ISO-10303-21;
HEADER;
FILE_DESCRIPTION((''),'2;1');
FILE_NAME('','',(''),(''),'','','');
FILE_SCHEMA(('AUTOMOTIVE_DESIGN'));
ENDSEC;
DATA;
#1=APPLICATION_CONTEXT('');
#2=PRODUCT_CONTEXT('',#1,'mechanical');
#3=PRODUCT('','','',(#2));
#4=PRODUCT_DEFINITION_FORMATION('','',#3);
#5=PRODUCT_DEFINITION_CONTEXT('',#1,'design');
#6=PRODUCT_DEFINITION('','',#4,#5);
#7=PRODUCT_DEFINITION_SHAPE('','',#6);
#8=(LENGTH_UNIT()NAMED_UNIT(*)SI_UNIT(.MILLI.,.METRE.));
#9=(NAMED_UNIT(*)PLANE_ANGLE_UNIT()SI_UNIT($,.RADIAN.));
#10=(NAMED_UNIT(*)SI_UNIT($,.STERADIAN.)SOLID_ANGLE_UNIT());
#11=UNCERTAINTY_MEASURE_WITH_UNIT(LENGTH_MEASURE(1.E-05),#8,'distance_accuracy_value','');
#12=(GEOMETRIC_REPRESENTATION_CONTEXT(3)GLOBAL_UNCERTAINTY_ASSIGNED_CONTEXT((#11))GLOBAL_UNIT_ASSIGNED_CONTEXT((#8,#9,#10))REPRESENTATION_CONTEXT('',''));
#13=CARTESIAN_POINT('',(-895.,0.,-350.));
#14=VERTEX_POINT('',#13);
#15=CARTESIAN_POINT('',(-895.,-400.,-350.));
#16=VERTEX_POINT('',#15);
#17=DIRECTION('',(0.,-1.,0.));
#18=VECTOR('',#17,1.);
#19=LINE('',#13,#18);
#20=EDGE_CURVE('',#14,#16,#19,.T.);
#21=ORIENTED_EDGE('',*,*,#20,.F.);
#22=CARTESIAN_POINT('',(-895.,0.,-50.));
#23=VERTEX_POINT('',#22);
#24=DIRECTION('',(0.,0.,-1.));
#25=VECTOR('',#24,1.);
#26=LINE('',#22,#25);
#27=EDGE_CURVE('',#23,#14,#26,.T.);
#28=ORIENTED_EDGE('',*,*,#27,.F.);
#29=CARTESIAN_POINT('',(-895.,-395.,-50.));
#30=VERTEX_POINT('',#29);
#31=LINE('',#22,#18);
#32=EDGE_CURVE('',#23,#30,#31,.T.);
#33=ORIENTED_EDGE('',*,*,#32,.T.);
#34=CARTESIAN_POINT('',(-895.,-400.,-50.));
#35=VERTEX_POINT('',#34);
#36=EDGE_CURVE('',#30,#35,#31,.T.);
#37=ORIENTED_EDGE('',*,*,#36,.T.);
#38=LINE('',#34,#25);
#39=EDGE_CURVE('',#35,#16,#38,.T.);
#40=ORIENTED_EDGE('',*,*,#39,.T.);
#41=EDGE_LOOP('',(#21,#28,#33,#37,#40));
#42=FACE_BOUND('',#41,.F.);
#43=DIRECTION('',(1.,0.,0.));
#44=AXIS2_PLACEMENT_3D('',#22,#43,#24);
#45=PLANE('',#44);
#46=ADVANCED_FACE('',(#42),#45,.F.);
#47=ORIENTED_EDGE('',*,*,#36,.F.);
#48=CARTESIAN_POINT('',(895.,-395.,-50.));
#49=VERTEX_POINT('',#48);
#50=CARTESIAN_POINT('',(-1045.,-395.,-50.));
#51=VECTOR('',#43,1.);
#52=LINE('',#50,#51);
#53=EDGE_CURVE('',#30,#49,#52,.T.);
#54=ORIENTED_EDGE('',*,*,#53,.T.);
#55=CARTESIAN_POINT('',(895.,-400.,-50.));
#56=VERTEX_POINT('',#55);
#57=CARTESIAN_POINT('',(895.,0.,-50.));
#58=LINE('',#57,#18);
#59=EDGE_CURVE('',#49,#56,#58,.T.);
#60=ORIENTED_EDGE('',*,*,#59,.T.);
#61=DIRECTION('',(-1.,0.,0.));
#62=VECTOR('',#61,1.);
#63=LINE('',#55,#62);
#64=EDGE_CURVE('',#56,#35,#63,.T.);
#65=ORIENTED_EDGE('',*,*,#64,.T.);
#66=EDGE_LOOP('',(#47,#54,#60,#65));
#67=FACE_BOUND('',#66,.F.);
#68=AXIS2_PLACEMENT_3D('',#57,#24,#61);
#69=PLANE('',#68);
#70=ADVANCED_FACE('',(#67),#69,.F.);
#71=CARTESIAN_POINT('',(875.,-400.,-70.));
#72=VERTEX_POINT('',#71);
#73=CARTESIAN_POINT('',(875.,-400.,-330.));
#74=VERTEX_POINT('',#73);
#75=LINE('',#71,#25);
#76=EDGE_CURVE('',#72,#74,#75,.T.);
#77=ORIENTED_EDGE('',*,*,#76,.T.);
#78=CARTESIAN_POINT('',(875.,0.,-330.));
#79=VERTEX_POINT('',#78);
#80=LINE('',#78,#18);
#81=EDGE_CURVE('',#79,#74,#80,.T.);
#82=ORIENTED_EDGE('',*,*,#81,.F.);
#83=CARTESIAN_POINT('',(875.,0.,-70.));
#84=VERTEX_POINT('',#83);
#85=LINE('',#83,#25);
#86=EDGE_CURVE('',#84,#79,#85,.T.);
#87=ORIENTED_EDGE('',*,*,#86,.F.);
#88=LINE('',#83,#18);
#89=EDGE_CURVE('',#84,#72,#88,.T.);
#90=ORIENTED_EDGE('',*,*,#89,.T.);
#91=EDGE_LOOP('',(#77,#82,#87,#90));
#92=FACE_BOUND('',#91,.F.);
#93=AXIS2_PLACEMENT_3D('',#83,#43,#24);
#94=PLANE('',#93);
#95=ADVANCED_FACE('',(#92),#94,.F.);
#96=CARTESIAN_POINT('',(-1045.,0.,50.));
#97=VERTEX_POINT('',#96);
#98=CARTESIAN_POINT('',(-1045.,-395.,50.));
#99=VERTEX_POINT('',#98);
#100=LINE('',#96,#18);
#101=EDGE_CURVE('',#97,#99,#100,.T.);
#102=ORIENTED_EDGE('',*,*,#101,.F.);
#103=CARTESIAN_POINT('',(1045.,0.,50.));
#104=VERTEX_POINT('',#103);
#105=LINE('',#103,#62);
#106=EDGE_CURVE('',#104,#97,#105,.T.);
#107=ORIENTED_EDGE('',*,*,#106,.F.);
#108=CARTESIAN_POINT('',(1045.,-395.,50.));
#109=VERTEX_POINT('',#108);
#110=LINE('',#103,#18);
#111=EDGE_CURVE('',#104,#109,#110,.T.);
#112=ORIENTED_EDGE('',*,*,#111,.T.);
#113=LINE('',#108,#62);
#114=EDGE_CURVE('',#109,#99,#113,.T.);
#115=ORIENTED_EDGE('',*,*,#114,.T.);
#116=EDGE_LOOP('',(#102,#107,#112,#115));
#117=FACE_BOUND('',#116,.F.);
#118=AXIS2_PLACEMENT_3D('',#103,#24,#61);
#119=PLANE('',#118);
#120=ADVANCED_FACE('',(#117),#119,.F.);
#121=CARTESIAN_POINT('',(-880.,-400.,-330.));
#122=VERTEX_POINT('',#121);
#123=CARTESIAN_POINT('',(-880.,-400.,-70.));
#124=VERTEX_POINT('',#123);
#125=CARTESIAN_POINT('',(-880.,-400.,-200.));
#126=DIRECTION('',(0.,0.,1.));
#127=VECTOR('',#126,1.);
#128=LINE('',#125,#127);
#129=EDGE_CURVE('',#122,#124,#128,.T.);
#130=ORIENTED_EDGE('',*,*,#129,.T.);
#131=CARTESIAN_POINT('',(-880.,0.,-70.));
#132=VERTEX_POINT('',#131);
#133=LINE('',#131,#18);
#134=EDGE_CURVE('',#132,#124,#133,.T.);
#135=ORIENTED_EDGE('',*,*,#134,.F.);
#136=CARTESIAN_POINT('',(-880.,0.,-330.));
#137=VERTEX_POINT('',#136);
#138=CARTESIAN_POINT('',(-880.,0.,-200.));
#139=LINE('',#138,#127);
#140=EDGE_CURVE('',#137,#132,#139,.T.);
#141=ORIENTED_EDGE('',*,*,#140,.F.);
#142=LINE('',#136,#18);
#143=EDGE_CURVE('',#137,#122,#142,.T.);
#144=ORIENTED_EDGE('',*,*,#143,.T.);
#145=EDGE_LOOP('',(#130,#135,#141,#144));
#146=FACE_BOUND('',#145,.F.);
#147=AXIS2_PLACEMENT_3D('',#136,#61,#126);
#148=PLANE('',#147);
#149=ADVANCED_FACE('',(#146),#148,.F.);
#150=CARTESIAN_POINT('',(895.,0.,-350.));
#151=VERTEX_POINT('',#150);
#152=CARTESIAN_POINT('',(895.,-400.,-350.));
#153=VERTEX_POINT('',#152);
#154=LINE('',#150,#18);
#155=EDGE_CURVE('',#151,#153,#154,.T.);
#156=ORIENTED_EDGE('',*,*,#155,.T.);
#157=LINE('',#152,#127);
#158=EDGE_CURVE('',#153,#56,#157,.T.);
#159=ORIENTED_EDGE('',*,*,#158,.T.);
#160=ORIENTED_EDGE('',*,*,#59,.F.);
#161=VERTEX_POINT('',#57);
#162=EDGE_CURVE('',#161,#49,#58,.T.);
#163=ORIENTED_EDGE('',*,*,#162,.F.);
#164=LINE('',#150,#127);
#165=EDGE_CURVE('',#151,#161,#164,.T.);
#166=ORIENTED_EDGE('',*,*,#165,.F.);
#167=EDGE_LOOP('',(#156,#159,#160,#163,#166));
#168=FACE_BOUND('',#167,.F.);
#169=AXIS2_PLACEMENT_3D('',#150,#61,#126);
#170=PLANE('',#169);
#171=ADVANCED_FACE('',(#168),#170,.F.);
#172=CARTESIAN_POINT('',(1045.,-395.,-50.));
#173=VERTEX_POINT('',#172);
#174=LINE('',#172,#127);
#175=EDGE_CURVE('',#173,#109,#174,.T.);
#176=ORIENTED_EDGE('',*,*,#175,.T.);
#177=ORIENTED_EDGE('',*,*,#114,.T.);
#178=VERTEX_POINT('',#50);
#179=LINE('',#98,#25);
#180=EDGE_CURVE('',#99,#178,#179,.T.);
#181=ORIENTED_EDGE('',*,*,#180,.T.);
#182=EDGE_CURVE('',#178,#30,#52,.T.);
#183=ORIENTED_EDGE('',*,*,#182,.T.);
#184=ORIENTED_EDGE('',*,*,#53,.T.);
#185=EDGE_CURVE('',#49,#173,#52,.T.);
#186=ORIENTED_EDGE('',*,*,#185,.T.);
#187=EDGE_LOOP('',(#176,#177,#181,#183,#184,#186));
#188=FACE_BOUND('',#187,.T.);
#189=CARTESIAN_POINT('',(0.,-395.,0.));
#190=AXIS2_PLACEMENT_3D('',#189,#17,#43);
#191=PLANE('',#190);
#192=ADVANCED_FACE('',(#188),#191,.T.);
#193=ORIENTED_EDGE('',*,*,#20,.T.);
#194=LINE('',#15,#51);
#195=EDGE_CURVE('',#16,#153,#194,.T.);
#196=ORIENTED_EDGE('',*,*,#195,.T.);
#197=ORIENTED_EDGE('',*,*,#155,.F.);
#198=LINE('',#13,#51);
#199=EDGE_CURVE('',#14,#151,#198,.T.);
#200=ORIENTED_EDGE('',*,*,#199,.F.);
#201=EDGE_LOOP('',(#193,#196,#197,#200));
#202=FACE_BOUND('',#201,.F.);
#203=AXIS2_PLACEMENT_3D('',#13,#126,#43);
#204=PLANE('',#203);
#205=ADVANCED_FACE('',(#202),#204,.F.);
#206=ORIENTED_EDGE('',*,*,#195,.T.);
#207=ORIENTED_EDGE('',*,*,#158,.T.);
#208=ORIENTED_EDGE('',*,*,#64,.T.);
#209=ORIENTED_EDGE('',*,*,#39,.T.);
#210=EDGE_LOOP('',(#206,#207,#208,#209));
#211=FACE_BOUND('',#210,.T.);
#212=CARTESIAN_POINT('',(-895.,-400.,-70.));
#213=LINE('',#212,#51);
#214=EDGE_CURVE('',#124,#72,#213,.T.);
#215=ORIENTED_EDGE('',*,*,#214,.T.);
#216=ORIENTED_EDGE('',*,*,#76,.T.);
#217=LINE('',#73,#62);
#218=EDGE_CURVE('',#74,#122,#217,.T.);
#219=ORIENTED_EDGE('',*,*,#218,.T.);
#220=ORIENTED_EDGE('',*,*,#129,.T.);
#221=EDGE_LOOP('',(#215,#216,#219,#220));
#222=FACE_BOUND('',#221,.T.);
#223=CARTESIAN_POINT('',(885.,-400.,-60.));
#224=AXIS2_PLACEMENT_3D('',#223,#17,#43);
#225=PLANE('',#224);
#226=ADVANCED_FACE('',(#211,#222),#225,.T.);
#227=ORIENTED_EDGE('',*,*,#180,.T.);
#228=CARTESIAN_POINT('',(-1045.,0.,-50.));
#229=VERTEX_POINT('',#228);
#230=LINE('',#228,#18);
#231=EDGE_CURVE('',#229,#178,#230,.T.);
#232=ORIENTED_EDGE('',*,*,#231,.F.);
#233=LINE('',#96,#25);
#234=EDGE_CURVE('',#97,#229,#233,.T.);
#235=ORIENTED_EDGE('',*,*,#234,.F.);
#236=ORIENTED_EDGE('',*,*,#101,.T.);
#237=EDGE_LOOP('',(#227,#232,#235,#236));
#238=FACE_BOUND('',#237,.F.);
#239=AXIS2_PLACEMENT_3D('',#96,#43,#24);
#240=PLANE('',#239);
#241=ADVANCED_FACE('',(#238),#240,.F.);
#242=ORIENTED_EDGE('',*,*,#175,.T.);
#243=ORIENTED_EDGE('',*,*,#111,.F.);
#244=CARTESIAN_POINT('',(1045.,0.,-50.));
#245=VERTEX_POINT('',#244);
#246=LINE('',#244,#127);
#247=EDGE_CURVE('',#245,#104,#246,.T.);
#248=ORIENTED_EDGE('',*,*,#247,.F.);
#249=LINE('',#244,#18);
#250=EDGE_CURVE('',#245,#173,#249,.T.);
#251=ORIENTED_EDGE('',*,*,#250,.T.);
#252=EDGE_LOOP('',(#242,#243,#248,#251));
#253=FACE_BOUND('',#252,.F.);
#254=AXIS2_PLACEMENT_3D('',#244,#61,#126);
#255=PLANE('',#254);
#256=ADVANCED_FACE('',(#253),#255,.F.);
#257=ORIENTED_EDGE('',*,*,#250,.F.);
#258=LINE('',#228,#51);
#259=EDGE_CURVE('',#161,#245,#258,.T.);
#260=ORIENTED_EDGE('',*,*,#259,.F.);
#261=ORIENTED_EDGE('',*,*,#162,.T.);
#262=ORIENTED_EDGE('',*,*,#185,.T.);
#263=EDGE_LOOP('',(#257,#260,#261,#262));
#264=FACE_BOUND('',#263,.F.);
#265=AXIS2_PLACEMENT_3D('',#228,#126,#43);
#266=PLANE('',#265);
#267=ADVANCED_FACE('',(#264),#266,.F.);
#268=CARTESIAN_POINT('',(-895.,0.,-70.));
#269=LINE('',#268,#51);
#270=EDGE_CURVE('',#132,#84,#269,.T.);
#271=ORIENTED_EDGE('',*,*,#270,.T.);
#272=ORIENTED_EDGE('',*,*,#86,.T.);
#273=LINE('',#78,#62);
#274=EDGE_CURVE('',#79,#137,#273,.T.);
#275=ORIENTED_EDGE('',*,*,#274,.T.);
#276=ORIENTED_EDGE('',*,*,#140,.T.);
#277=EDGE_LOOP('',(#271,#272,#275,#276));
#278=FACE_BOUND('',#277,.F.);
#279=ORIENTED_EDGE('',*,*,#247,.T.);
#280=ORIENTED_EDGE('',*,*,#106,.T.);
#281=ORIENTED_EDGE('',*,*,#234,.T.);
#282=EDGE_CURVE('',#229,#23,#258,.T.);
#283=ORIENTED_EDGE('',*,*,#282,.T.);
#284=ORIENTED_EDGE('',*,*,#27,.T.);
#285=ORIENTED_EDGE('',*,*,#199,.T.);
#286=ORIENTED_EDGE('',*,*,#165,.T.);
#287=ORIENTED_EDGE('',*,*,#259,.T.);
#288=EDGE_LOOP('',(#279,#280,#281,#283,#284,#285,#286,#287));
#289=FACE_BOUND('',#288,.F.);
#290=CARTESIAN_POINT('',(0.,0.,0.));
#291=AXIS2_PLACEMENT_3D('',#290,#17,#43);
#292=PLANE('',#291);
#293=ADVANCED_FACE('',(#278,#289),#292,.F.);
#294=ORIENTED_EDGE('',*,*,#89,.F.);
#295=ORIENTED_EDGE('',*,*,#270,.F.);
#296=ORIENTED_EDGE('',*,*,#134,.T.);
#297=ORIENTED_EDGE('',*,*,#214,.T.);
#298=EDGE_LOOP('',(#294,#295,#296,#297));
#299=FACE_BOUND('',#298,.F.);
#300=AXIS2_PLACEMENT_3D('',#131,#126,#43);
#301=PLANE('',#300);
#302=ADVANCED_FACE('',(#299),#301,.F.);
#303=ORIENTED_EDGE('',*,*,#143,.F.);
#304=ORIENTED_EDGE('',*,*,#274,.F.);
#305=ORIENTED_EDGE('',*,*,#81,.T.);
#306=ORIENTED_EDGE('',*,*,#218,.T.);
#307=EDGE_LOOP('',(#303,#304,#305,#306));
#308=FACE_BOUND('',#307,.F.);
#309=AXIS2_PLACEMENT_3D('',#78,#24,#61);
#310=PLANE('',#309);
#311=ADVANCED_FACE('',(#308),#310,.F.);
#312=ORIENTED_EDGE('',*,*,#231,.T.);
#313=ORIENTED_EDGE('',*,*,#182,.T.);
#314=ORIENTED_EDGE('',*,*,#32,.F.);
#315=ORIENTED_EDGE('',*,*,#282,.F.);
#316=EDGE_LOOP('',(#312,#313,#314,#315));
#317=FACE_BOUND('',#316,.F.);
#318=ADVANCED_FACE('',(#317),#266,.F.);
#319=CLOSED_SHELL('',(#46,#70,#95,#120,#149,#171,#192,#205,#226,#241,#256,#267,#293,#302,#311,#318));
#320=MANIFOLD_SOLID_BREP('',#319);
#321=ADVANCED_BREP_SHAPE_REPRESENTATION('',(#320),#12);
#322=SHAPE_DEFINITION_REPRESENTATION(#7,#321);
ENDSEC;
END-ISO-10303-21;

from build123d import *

# Parameters (mm, degrees)
F0_W     = 20
F0_H     = 20
F0_H_2   = 260
F0_W_2   = 15
F0_W_3   = 880
F1_DEPTH = 400
F2_DEPTH = 395


# Not quite as in the source:
# - a feature names something its author has since deleted; it is built from what else it names


with BuildPart() as f1:
    # F0 (on Front) → F1 (new body)
    with BuildSketch(Plane.XZ):
        with Locations((885, -60)):
            Rectangle(F0_W, F0_H)
        Polygon((875, -70), (875, -50), (-5, -50), (-5, -70), (145, -70), align=None)
        with Locations((885, -200)):
            Rectangle(F0_W, F0_H_2)
        Polygon((-5, -70), (-5, -50), (-880, -50), (-880, -70), (-145, -70), align=None)
        with Locations((885, -340)):
            Rectangle(F0_W, F0_H)
        with Locations((-887.5, -60)):
            Rectangle(F0_W_2, F0_H)
        with Locations((435, -340)):
            Rectangle(F0_W_3, F0_H)
        with Locations((-887.5, -200)):
            Rectangle(F0_W_2, F0_H_2)
        Polygon((-5, -350), (-5, -330), (-145, -330), (-880, -330), (-880, -350), (-145, -350), align=None)
        with Locations((-887.5, -340)):
            Rectangle(F0_W_2, F0_H)
    extrude(amount=F1_DEPTH)

    # F0 (on Front) → F2 (join)
    with BuildSketch(Plane.XZ):
        Polygon((895, -50), (1045, -50), (1045, 50), (-1045, 50), (-1045, -50), (-895, -50), (-880, -50), (-5, -50), (875, -50), align=None)
    extrude(amount=F2_DEPTH)


solid = f1.part
